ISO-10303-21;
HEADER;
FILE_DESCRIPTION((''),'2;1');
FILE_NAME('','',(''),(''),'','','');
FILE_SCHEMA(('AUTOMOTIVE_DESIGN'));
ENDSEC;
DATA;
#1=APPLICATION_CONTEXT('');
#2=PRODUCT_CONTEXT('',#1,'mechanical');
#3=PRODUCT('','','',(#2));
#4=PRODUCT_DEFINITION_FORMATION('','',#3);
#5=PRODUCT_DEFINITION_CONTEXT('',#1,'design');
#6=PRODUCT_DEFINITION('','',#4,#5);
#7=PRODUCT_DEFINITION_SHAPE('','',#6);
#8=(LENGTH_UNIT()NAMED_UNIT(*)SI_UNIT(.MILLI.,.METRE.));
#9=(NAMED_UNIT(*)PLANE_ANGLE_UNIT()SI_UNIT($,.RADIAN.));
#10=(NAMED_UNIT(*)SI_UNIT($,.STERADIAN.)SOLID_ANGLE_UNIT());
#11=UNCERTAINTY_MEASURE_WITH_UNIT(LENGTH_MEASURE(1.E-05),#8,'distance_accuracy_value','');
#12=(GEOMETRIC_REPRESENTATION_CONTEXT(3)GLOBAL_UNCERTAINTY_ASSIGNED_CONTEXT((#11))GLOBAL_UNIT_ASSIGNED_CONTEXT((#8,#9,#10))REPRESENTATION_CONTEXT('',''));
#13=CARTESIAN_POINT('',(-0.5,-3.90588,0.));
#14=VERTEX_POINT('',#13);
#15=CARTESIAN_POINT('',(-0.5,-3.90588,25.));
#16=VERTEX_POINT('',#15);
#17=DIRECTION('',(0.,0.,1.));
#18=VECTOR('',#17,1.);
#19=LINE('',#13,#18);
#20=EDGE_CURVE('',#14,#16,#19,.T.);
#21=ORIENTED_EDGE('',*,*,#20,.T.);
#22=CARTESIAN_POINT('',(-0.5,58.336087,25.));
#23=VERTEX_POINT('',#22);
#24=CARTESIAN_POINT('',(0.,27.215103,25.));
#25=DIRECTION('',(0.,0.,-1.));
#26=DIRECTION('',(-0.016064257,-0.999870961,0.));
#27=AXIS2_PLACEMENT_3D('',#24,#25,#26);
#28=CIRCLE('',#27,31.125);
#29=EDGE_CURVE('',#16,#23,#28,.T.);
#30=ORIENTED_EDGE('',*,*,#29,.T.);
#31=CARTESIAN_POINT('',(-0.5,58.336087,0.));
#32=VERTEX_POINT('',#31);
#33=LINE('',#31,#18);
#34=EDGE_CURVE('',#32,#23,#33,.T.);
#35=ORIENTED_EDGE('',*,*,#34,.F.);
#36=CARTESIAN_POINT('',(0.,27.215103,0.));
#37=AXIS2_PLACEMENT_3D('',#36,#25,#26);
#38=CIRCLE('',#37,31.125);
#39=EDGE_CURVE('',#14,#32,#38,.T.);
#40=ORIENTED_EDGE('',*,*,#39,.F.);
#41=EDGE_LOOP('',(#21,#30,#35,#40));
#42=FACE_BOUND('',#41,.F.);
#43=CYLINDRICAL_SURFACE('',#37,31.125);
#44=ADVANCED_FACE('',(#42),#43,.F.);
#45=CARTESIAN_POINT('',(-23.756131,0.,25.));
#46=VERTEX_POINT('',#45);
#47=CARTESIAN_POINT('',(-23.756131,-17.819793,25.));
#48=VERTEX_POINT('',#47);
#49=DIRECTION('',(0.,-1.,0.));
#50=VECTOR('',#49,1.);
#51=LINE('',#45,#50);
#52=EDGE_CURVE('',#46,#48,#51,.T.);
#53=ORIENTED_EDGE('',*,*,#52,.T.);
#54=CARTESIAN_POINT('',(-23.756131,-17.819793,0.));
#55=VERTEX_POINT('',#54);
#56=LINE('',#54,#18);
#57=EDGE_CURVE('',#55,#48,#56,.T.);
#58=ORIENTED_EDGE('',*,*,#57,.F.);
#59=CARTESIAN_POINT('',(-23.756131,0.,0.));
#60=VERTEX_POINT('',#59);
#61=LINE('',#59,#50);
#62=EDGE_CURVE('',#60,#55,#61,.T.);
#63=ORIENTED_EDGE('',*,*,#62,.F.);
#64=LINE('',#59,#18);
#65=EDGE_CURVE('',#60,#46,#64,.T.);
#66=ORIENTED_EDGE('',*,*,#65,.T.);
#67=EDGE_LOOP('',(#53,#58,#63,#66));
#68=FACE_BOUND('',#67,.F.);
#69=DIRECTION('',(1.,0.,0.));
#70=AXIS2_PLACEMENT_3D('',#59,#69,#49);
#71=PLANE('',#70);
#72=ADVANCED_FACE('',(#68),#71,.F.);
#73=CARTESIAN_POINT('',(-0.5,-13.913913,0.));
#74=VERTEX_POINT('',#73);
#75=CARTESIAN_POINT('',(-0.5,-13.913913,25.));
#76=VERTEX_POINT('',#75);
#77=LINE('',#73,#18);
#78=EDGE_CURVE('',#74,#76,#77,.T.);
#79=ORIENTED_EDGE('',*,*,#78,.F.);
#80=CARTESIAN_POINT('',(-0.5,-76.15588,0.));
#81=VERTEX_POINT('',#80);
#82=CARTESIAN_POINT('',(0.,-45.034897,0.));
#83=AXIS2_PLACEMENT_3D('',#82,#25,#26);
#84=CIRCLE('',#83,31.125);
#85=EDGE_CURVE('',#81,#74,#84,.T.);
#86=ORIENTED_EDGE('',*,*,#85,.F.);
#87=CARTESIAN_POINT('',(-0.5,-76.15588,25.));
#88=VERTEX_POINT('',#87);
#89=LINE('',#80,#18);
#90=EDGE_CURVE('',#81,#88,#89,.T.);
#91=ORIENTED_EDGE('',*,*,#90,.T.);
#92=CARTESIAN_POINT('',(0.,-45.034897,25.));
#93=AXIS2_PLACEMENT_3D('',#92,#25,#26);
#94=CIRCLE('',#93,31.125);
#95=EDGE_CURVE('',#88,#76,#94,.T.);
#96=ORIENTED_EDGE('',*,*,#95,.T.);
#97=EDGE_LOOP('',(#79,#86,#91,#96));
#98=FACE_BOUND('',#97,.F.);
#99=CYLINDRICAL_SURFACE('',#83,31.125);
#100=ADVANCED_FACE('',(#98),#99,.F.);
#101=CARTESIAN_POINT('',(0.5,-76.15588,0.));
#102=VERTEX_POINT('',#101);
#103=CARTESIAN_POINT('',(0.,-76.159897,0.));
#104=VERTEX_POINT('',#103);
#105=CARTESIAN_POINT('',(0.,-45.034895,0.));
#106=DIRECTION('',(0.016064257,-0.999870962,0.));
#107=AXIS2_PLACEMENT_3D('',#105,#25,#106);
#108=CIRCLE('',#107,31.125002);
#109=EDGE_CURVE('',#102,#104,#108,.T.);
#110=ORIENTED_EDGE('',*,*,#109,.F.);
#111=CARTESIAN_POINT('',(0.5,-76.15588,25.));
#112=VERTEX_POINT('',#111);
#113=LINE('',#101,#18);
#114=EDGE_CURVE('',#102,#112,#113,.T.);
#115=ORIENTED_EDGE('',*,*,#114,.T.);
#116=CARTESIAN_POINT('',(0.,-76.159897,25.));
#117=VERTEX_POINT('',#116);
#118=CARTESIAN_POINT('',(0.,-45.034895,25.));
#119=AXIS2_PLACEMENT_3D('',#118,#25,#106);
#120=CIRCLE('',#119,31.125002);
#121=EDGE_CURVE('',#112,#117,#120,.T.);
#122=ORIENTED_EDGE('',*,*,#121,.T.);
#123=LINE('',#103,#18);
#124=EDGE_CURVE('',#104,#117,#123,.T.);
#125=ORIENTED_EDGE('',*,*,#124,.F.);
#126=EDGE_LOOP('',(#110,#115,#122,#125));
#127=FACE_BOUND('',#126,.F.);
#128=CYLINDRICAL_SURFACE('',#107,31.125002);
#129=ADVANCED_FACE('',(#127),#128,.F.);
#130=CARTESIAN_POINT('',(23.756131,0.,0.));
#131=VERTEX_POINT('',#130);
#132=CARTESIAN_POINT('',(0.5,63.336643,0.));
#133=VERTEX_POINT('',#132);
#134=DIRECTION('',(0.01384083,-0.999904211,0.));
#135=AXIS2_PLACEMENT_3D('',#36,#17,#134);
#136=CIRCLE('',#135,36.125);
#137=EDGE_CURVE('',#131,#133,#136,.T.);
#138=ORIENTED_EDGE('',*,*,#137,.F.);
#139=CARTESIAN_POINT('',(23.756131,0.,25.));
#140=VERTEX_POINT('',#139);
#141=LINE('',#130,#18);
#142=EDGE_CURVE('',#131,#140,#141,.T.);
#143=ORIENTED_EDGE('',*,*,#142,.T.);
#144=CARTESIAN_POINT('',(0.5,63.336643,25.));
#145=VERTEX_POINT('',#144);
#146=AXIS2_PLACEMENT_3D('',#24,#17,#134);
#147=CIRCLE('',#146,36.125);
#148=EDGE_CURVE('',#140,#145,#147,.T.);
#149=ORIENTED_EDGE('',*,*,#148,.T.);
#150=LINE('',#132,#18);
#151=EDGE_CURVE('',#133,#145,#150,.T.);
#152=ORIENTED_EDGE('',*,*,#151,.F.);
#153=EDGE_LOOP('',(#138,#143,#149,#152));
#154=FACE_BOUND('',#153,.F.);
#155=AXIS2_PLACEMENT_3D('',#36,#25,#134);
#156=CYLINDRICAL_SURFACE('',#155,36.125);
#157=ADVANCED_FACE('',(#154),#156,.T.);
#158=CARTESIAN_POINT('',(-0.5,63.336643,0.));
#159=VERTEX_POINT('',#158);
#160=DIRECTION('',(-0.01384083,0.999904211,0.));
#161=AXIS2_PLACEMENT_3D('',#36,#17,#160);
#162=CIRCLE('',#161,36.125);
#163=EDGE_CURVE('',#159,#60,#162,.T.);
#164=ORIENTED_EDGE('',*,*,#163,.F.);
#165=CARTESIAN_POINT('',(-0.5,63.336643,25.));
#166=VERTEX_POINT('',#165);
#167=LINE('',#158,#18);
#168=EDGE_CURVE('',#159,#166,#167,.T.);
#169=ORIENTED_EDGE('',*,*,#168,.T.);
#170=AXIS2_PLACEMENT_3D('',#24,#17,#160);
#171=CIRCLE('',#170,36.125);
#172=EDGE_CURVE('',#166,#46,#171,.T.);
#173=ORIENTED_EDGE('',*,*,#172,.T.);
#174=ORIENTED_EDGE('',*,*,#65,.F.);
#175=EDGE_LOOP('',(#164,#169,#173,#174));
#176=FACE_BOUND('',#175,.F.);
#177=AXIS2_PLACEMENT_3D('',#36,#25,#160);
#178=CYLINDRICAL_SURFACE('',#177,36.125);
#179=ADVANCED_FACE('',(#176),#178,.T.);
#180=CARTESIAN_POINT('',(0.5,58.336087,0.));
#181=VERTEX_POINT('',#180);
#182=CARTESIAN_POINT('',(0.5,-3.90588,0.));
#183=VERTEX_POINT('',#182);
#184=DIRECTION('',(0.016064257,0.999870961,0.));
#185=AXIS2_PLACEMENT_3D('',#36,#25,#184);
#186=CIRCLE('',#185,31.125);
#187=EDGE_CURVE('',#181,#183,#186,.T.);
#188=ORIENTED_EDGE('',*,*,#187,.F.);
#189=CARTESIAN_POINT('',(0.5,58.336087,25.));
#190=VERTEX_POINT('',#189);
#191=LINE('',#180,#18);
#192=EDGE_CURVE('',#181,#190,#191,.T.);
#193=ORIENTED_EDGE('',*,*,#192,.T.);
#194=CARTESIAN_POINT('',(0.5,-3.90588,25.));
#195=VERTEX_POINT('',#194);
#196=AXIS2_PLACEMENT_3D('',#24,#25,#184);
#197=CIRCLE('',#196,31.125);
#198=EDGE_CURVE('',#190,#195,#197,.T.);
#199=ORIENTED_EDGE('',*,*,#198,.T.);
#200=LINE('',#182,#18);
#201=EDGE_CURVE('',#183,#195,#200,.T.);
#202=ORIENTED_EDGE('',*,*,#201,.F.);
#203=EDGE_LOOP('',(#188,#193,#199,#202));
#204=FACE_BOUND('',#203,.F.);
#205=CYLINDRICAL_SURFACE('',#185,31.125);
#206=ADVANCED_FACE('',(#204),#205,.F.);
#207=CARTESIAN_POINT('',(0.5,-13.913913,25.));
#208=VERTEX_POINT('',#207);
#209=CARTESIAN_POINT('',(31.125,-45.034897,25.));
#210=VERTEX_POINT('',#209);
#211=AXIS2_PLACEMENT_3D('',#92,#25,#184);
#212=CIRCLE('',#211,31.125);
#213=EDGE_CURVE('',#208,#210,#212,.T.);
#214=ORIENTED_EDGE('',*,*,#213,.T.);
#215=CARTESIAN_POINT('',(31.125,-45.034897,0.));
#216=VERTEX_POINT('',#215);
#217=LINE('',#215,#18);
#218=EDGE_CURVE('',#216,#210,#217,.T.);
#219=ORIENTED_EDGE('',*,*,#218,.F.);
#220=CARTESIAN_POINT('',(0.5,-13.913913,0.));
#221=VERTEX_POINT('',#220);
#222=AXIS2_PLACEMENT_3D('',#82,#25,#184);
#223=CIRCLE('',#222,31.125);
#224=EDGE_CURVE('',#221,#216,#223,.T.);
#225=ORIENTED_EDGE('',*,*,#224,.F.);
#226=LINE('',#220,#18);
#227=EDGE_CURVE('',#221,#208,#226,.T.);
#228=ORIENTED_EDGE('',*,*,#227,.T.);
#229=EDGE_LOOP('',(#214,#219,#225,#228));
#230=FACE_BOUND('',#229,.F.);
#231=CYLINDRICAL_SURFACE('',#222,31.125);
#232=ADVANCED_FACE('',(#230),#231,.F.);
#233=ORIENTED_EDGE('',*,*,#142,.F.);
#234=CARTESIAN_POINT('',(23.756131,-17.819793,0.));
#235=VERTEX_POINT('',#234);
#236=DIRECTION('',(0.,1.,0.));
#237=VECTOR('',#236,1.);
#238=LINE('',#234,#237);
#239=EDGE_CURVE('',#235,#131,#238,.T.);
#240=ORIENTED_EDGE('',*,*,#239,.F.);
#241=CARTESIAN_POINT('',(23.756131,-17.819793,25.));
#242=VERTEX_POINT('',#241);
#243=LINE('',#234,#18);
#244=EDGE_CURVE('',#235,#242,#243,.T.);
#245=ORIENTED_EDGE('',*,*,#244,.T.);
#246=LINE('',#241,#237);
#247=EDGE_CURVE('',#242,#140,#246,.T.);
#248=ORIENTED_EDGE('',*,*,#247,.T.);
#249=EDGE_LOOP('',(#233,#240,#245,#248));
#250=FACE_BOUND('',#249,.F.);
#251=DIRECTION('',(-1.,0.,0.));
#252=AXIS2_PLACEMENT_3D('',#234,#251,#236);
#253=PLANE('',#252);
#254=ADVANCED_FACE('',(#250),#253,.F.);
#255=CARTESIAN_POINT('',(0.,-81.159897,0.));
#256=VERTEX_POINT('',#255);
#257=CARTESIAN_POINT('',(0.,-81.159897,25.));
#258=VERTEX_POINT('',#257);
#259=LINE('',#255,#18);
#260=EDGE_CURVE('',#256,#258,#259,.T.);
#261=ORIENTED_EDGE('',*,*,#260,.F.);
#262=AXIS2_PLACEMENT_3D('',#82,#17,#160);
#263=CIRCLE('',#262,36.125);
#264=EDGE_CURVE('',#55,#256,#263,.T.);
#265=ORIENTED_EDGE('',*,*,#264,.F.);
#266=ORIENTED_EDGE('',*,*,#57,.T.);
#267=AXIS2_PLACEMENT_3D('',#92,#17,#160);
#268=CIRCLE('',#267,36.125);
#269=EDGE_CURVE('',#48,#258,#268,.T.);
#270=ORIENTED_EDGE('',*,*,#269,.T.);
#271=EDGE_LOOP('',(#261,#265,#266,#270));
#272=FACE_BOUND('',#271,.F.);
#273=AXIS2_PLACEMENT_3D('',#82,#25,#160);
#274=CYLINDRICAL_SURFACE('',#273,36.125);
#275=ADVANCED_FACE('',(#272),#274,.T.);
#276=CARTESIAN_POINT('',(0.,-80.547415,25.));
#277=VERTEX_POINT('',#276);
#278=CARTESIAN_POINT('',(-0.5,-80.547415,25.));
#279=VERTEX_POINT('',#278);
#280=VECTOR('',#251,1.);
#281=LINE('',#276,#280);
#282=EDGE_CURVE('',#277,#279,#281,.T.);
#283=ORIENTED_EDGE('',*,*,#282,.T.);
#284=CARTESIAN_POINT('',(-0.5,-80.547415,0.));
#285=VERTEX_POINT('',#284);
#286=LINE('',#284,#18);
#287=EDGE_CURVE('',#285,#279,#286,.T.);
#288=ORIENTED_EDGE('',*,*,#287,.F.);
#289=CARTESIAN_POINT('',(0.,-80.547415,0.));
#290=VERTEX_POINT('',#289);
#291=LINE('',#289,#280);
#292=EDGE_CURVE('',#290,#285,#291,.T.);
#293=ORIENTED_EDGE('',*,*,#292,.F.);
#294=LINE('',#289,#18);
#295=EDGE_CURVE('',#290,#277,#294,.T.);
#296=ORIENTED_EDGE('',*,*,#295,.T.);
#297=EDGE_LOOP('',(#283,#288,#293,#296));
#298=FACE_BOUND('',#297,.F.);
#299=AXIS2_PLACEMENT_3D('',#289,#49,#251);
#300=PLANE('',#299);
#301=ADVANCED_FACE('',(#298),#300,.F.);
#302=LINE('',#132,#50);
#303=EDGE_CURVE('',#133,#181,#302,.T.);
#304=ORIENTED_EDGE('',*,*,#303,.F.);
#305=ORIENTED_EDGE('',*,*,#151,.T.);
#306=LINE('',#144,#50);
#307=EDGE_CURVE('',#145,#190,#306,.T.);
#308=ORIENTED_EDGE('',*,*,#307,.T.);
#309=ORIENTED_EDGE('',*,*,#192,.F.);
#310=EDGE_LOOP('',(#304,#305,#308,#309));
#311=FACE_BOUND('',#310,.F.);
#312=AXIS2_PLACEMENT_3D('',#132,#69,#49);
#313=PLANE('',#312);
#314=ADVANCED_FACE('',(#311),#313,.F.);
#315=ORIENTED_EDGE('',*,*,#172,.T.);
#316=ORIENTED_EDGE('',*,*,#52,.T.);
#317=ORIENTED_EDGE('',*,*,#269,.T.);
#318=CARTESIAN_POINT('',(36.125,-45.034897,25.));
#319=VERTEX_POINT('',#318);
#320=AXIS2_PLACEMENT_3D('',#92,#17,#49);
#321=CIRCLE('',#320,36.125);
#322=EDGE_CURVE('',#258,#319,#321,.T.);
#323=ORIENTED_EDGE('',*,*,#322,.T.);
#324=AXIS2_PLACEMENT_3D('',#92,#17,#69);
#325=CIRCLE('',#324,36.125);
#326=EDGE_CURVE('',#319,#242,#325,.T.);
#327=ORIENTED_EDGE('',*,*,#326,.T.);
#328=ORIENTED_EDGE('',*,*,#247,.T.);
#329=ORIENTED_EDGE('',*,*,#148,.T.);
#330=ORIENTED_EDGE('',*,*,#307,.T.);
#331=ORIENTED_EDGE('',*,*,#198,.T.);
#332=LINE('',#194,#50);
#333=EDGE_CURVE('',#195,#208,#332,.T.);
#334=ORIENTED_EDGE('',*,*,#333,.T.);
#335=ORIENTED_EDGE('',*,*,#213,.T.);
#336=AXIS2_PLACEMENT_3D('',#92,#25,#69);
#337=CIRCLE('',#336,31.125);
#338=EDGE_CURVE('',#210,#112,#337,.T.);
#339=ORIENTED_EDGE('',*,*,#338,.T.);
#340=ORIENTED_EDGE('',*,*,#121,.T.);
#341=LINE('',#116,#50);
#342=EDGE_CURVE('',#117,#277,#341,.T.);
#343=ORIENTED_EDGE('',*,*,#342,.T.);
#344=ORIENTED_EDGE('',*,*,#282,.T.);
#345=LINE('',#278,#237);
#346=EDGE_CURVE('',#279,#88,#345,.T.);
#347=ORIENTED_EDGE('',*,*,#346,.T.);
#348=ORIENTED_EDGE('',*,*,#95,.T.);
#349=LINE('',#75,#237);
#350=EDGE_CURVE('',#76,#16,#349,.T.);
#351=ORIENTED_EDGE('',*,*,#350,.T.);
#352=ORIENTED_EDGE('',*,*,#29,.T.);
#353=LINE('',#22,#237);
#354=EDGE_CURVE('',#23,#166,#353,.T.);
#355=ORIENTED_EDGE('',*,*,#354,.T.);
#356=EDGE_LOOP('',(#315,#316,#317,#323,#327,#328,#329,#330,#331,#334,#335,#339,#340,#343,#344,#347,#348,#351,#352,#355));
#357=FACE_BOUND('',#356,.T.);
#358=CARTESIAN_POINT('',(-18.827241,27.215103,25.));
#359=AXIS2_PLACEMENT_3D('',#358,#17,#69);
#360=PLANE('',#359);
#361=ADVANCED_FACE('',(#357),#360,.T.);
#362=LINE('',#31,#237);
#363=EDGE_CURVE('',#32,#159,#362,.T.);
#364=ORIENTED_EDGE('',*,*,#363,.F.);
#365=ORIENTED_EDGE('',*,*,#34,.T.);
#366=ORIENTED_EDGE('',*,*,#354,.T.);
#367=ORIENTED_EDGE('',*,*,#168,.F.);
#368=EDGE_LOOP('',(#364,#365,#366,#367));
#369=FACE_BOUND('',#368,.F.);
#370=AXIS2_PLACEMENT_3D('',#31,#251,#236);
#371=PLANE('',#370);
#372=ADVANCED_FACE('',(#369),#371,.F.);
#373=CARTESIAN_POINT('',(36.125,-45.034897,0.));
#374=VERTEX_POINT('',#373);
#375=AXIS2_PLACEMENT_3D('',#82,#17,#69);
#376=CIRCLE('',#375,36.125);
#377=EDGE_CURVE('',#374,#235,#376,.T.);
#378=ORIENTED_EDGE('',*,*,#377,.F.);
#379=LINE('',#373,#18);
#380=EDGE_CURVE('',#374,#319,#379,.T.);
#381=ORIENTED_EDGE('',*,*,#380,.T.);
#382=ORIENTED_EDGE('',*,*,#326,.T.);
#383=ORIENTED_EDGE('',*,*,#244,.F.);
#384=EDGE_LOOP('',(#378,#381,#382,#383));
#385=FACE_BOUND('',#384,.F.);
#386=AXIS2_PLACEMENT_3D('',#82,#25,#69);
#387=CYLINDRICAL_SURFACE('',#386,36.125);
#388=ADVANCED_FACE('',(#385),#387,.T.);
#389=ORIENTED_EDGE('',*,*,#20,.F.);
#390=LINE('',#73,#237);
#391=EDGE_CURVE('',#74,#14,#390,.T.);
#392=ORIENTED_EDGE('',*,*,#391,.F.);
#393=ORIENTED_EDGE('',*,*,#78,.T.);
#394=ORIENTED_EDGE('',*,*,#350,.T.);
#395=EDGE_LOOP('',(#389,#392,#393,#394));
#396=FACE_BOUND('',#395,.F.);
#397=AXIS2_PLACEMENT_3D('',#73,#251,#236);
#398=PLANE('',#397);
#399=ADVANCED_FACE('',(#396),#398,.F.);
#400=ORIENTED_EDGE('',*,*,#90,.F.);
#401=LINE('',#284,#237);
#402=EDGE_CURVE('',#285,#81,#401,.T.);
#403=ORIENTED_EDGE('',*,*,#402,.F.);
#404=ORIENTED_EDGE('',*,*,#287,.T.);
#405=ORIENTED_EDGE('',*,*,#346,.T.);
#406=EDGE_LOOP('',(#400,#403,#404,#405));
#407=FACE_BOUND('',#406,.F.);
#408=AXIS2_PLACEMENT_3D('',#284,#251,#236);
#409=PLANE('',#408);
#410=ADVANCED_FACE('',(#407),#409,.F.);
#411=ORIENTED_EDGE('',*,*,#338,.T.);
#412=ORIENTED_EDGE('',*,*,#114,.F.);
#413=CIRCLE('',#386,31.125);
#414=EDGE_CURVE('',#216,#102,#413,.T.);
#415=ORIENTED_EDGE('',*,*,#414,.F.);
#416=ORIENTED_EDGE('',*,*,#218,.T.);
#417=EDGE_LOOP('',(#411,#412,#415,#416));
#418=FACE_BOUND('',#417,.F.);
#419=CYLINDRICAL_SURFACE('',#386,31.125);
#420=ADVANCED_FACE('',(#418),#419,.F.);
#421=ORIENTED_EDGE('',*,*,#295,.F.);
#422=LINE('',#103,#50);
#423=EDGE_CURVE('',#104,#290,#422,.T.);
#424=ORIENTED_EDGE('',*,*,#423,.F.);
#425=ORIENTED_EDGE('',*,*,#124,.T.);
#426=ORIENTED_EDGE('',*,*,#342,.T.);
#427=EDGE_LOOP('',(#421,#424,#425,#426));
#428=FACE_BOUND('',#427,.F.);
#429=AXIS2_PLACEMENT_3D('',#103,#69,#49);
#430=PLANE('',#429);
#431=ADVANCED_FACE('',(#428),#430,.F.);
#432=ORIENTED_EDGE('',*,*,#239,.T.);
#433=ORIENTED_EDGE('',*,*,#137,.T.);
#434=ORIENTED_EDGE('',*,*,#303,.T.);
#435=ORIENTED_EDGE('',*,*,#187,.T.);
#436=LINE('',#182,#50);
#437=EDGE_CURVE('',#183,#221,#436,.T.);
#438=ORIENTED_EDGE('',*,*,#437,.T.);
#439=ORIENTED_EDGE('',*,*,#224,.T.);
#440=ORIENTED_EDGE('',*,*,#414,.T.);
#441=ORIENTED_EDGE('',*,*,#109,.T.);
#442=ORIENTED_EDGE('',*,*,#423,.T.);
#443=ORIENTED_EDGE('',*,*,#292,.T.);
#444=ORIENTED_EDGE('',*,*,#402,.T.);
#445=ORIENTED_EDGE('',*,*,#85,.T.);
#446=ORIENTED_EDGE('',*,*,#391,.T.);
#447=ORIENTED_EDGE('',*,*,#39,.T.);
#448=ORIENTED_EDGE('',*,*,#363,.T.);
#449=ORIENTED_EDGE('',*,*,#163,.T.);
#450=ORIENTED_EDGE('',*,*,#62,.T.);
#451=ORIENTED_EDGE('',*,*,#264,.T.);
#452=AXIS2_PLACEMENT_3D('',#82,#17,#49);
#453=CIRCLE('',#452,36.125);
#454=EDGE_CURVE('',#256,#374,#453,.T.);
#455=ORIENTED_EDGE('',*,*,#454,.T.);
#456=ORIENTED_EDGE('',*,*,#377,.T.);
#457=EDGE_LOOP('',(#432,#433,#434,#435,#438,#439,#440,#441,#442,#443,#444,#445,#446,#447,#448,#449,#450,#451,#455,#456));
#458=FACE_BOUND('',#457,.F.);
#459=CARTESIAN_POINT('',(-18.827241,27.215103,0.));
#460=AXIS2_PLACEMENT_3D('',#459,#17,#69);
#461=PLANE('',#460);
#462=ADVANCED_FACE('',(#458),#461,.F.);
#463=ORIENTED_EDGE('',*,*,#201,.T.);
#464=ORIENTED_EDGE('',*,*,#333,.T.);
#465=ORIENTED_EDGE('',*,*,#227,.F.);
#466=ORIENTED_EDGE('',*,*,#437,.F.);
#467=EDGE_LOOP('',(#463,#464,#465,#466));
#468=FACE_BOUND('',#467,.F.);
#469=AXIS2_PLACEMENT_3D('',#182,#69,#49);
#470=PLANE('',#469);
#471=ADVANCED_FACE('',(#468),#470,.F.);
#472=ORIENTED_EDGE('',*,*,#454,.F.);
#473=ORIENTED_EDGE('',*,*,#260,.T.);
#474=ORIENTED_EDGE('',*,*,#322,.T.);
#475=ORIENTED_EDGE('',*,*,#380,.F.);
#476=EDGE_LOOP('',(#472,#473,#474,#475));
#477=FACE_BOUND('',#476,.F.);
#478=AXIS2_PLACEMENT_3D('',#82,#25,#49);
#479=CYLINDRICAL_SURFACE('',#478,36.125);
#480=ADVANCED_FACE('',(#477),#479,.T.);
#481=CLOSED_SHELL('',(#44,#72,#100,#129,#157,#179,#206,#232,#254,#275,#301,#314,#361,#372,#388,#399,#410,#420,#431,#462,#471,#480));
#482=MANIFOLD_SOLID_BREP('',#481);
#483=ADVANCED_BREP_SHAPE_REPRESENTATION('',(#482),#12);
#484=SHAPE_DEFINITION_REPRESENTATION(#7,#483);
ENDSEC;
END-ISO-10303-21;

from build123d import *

# Parameters (mm, degrees)
F1_DEPTH = 25


with BuildPart() as f1:
    # F0 (on Top) → F1 (new body)
    with BuildSketch(Plane.XY):
        with BuildLine():
            ThreePointArc((-0.5, -3.905880259), (-31.125, 27.2151034176), (-0.5, 58.3360870942))
            Line((-0.5, 58.3360870942), (-0.5, 63.3366430443))
            ThreePointArc((-0.5, 63.3366430443), (-33.9112453853, 39.6667322838), (-23.756131229, 0))
            ThreePointArc((-23.756131229, 0), (-12.9197959363, -6.5205527634), (-0.5, -8.906436209))
            Line((-0.5, -8.906436209), (-0.5, -3.905880259))
        make_face()
        with BuildLine():
            Line((-0.5, -8.9133569557), (-0.5, -8.906436209))
            ThreePointArc((-0.5, -8.906436209), (-12.9197959363, -6.5205527634), (-23.756131229, 0))
            Line((-23.756131229, 0), (-23.756131229, -17.8197931647))
            ThreePointArc((-23.756131229, -17.8197931647), (-12.9197959363, -11.2992404013), (-0.5, -8.9133569557))
        make_face()
        with BuildLine():
            ThreePointArc((0.5, 58.3360870942), (31.125, 27.2151034176), (0.5, -3.905880259))
            Line((0.5, -3.905880259), (0.5, -8.906436209))
            ThreePointArc((0.5, -8.906436209), (12.9197959363, -6.5205527634), (23.756131229, 0))
            ThreePointArc((23.756131229, 0), (33.9112453853, 39.6667322838), (0.5, 63.3366430443))
            Line((0.5, 63.3366430443), (0.5, 58.3360870942))
        make_face()
        with BuildLine():
            Line((-0.5, -13.9139129058), (-0.5, -8.9133569557))
            ThreePointArc((-0.5, -8.9133569557), (-12.9197959363, -11.2992404013), (-23.756131229, -17.8197931647))
            ThreePointArc((-23.756131229, -17.8197931647), (-33.8242607899, -57.7209127821), (0, -81.1598965824))
            Line((0, -81.1598965824), (0, -80.5474147201))
            Line((0, -80.5474147201), (-0.5, -80.5474147201))
            Line((-0.5, -80.5474147201), (-0.5, -76.155880259))
            ThreePointArc((-0.5, -76.155880259), (-31.125, -45.0348965824), (-0.5, -13.9139129058))
        make_face()
        with BuildLine():
            ThreePointArc((23.756131229, 0), (12.9197959363, -6.5205527634), (0.5, -8.906436209))
            Line((0.5, -8.906436209), (0.5, -8.9133569557))
            ThreePointArc((0.5, -8.9133569557), (12.9197959363, -11.2992404013), (23.756131229, -17.8197931647))
            Line((23.756131229, -17.8197931647), (23.756131229, 0))
        make_face()
        with BuildLine():
            ThreePointArc((23.756131229, -17.8197931647), (12.9197959363, -11.2992404013), (0.5, -8.9133569557))
            Line((0.5, -8.9133569557), (0.5, -13.9139129058))
            ThreePointArc((0.5, -13.9139129058), (22.1847709589, -23.2036904201), (31.125, -45.0348965824))
            ThreePointArc((31.125, -45.0348965824), (22.1847709589, -66.8661027446), (0.5, -76.155880259))
            ThreePointArc((0.5, -76.155880259), (0.2500080653, -76.1588924853), (0, -76.1598965824))
            Line((0, -76.1598965824), (0, -80.5474147201))
            Line((0, -80.5474147201), (0, -81.1598965824))
            ThreePointArc((0, -81.1598965824), (25.5442324704, -70.5791290527), (36.125, -45.0348965824))
            ThreePointArc((36.125, -45.0348965824), (32.8877322542, -30.0879004903), (23.756131229, -17.8197931647))
        make_face()
    extrude(amount=F1_DEPTH)


solid = f1.part
